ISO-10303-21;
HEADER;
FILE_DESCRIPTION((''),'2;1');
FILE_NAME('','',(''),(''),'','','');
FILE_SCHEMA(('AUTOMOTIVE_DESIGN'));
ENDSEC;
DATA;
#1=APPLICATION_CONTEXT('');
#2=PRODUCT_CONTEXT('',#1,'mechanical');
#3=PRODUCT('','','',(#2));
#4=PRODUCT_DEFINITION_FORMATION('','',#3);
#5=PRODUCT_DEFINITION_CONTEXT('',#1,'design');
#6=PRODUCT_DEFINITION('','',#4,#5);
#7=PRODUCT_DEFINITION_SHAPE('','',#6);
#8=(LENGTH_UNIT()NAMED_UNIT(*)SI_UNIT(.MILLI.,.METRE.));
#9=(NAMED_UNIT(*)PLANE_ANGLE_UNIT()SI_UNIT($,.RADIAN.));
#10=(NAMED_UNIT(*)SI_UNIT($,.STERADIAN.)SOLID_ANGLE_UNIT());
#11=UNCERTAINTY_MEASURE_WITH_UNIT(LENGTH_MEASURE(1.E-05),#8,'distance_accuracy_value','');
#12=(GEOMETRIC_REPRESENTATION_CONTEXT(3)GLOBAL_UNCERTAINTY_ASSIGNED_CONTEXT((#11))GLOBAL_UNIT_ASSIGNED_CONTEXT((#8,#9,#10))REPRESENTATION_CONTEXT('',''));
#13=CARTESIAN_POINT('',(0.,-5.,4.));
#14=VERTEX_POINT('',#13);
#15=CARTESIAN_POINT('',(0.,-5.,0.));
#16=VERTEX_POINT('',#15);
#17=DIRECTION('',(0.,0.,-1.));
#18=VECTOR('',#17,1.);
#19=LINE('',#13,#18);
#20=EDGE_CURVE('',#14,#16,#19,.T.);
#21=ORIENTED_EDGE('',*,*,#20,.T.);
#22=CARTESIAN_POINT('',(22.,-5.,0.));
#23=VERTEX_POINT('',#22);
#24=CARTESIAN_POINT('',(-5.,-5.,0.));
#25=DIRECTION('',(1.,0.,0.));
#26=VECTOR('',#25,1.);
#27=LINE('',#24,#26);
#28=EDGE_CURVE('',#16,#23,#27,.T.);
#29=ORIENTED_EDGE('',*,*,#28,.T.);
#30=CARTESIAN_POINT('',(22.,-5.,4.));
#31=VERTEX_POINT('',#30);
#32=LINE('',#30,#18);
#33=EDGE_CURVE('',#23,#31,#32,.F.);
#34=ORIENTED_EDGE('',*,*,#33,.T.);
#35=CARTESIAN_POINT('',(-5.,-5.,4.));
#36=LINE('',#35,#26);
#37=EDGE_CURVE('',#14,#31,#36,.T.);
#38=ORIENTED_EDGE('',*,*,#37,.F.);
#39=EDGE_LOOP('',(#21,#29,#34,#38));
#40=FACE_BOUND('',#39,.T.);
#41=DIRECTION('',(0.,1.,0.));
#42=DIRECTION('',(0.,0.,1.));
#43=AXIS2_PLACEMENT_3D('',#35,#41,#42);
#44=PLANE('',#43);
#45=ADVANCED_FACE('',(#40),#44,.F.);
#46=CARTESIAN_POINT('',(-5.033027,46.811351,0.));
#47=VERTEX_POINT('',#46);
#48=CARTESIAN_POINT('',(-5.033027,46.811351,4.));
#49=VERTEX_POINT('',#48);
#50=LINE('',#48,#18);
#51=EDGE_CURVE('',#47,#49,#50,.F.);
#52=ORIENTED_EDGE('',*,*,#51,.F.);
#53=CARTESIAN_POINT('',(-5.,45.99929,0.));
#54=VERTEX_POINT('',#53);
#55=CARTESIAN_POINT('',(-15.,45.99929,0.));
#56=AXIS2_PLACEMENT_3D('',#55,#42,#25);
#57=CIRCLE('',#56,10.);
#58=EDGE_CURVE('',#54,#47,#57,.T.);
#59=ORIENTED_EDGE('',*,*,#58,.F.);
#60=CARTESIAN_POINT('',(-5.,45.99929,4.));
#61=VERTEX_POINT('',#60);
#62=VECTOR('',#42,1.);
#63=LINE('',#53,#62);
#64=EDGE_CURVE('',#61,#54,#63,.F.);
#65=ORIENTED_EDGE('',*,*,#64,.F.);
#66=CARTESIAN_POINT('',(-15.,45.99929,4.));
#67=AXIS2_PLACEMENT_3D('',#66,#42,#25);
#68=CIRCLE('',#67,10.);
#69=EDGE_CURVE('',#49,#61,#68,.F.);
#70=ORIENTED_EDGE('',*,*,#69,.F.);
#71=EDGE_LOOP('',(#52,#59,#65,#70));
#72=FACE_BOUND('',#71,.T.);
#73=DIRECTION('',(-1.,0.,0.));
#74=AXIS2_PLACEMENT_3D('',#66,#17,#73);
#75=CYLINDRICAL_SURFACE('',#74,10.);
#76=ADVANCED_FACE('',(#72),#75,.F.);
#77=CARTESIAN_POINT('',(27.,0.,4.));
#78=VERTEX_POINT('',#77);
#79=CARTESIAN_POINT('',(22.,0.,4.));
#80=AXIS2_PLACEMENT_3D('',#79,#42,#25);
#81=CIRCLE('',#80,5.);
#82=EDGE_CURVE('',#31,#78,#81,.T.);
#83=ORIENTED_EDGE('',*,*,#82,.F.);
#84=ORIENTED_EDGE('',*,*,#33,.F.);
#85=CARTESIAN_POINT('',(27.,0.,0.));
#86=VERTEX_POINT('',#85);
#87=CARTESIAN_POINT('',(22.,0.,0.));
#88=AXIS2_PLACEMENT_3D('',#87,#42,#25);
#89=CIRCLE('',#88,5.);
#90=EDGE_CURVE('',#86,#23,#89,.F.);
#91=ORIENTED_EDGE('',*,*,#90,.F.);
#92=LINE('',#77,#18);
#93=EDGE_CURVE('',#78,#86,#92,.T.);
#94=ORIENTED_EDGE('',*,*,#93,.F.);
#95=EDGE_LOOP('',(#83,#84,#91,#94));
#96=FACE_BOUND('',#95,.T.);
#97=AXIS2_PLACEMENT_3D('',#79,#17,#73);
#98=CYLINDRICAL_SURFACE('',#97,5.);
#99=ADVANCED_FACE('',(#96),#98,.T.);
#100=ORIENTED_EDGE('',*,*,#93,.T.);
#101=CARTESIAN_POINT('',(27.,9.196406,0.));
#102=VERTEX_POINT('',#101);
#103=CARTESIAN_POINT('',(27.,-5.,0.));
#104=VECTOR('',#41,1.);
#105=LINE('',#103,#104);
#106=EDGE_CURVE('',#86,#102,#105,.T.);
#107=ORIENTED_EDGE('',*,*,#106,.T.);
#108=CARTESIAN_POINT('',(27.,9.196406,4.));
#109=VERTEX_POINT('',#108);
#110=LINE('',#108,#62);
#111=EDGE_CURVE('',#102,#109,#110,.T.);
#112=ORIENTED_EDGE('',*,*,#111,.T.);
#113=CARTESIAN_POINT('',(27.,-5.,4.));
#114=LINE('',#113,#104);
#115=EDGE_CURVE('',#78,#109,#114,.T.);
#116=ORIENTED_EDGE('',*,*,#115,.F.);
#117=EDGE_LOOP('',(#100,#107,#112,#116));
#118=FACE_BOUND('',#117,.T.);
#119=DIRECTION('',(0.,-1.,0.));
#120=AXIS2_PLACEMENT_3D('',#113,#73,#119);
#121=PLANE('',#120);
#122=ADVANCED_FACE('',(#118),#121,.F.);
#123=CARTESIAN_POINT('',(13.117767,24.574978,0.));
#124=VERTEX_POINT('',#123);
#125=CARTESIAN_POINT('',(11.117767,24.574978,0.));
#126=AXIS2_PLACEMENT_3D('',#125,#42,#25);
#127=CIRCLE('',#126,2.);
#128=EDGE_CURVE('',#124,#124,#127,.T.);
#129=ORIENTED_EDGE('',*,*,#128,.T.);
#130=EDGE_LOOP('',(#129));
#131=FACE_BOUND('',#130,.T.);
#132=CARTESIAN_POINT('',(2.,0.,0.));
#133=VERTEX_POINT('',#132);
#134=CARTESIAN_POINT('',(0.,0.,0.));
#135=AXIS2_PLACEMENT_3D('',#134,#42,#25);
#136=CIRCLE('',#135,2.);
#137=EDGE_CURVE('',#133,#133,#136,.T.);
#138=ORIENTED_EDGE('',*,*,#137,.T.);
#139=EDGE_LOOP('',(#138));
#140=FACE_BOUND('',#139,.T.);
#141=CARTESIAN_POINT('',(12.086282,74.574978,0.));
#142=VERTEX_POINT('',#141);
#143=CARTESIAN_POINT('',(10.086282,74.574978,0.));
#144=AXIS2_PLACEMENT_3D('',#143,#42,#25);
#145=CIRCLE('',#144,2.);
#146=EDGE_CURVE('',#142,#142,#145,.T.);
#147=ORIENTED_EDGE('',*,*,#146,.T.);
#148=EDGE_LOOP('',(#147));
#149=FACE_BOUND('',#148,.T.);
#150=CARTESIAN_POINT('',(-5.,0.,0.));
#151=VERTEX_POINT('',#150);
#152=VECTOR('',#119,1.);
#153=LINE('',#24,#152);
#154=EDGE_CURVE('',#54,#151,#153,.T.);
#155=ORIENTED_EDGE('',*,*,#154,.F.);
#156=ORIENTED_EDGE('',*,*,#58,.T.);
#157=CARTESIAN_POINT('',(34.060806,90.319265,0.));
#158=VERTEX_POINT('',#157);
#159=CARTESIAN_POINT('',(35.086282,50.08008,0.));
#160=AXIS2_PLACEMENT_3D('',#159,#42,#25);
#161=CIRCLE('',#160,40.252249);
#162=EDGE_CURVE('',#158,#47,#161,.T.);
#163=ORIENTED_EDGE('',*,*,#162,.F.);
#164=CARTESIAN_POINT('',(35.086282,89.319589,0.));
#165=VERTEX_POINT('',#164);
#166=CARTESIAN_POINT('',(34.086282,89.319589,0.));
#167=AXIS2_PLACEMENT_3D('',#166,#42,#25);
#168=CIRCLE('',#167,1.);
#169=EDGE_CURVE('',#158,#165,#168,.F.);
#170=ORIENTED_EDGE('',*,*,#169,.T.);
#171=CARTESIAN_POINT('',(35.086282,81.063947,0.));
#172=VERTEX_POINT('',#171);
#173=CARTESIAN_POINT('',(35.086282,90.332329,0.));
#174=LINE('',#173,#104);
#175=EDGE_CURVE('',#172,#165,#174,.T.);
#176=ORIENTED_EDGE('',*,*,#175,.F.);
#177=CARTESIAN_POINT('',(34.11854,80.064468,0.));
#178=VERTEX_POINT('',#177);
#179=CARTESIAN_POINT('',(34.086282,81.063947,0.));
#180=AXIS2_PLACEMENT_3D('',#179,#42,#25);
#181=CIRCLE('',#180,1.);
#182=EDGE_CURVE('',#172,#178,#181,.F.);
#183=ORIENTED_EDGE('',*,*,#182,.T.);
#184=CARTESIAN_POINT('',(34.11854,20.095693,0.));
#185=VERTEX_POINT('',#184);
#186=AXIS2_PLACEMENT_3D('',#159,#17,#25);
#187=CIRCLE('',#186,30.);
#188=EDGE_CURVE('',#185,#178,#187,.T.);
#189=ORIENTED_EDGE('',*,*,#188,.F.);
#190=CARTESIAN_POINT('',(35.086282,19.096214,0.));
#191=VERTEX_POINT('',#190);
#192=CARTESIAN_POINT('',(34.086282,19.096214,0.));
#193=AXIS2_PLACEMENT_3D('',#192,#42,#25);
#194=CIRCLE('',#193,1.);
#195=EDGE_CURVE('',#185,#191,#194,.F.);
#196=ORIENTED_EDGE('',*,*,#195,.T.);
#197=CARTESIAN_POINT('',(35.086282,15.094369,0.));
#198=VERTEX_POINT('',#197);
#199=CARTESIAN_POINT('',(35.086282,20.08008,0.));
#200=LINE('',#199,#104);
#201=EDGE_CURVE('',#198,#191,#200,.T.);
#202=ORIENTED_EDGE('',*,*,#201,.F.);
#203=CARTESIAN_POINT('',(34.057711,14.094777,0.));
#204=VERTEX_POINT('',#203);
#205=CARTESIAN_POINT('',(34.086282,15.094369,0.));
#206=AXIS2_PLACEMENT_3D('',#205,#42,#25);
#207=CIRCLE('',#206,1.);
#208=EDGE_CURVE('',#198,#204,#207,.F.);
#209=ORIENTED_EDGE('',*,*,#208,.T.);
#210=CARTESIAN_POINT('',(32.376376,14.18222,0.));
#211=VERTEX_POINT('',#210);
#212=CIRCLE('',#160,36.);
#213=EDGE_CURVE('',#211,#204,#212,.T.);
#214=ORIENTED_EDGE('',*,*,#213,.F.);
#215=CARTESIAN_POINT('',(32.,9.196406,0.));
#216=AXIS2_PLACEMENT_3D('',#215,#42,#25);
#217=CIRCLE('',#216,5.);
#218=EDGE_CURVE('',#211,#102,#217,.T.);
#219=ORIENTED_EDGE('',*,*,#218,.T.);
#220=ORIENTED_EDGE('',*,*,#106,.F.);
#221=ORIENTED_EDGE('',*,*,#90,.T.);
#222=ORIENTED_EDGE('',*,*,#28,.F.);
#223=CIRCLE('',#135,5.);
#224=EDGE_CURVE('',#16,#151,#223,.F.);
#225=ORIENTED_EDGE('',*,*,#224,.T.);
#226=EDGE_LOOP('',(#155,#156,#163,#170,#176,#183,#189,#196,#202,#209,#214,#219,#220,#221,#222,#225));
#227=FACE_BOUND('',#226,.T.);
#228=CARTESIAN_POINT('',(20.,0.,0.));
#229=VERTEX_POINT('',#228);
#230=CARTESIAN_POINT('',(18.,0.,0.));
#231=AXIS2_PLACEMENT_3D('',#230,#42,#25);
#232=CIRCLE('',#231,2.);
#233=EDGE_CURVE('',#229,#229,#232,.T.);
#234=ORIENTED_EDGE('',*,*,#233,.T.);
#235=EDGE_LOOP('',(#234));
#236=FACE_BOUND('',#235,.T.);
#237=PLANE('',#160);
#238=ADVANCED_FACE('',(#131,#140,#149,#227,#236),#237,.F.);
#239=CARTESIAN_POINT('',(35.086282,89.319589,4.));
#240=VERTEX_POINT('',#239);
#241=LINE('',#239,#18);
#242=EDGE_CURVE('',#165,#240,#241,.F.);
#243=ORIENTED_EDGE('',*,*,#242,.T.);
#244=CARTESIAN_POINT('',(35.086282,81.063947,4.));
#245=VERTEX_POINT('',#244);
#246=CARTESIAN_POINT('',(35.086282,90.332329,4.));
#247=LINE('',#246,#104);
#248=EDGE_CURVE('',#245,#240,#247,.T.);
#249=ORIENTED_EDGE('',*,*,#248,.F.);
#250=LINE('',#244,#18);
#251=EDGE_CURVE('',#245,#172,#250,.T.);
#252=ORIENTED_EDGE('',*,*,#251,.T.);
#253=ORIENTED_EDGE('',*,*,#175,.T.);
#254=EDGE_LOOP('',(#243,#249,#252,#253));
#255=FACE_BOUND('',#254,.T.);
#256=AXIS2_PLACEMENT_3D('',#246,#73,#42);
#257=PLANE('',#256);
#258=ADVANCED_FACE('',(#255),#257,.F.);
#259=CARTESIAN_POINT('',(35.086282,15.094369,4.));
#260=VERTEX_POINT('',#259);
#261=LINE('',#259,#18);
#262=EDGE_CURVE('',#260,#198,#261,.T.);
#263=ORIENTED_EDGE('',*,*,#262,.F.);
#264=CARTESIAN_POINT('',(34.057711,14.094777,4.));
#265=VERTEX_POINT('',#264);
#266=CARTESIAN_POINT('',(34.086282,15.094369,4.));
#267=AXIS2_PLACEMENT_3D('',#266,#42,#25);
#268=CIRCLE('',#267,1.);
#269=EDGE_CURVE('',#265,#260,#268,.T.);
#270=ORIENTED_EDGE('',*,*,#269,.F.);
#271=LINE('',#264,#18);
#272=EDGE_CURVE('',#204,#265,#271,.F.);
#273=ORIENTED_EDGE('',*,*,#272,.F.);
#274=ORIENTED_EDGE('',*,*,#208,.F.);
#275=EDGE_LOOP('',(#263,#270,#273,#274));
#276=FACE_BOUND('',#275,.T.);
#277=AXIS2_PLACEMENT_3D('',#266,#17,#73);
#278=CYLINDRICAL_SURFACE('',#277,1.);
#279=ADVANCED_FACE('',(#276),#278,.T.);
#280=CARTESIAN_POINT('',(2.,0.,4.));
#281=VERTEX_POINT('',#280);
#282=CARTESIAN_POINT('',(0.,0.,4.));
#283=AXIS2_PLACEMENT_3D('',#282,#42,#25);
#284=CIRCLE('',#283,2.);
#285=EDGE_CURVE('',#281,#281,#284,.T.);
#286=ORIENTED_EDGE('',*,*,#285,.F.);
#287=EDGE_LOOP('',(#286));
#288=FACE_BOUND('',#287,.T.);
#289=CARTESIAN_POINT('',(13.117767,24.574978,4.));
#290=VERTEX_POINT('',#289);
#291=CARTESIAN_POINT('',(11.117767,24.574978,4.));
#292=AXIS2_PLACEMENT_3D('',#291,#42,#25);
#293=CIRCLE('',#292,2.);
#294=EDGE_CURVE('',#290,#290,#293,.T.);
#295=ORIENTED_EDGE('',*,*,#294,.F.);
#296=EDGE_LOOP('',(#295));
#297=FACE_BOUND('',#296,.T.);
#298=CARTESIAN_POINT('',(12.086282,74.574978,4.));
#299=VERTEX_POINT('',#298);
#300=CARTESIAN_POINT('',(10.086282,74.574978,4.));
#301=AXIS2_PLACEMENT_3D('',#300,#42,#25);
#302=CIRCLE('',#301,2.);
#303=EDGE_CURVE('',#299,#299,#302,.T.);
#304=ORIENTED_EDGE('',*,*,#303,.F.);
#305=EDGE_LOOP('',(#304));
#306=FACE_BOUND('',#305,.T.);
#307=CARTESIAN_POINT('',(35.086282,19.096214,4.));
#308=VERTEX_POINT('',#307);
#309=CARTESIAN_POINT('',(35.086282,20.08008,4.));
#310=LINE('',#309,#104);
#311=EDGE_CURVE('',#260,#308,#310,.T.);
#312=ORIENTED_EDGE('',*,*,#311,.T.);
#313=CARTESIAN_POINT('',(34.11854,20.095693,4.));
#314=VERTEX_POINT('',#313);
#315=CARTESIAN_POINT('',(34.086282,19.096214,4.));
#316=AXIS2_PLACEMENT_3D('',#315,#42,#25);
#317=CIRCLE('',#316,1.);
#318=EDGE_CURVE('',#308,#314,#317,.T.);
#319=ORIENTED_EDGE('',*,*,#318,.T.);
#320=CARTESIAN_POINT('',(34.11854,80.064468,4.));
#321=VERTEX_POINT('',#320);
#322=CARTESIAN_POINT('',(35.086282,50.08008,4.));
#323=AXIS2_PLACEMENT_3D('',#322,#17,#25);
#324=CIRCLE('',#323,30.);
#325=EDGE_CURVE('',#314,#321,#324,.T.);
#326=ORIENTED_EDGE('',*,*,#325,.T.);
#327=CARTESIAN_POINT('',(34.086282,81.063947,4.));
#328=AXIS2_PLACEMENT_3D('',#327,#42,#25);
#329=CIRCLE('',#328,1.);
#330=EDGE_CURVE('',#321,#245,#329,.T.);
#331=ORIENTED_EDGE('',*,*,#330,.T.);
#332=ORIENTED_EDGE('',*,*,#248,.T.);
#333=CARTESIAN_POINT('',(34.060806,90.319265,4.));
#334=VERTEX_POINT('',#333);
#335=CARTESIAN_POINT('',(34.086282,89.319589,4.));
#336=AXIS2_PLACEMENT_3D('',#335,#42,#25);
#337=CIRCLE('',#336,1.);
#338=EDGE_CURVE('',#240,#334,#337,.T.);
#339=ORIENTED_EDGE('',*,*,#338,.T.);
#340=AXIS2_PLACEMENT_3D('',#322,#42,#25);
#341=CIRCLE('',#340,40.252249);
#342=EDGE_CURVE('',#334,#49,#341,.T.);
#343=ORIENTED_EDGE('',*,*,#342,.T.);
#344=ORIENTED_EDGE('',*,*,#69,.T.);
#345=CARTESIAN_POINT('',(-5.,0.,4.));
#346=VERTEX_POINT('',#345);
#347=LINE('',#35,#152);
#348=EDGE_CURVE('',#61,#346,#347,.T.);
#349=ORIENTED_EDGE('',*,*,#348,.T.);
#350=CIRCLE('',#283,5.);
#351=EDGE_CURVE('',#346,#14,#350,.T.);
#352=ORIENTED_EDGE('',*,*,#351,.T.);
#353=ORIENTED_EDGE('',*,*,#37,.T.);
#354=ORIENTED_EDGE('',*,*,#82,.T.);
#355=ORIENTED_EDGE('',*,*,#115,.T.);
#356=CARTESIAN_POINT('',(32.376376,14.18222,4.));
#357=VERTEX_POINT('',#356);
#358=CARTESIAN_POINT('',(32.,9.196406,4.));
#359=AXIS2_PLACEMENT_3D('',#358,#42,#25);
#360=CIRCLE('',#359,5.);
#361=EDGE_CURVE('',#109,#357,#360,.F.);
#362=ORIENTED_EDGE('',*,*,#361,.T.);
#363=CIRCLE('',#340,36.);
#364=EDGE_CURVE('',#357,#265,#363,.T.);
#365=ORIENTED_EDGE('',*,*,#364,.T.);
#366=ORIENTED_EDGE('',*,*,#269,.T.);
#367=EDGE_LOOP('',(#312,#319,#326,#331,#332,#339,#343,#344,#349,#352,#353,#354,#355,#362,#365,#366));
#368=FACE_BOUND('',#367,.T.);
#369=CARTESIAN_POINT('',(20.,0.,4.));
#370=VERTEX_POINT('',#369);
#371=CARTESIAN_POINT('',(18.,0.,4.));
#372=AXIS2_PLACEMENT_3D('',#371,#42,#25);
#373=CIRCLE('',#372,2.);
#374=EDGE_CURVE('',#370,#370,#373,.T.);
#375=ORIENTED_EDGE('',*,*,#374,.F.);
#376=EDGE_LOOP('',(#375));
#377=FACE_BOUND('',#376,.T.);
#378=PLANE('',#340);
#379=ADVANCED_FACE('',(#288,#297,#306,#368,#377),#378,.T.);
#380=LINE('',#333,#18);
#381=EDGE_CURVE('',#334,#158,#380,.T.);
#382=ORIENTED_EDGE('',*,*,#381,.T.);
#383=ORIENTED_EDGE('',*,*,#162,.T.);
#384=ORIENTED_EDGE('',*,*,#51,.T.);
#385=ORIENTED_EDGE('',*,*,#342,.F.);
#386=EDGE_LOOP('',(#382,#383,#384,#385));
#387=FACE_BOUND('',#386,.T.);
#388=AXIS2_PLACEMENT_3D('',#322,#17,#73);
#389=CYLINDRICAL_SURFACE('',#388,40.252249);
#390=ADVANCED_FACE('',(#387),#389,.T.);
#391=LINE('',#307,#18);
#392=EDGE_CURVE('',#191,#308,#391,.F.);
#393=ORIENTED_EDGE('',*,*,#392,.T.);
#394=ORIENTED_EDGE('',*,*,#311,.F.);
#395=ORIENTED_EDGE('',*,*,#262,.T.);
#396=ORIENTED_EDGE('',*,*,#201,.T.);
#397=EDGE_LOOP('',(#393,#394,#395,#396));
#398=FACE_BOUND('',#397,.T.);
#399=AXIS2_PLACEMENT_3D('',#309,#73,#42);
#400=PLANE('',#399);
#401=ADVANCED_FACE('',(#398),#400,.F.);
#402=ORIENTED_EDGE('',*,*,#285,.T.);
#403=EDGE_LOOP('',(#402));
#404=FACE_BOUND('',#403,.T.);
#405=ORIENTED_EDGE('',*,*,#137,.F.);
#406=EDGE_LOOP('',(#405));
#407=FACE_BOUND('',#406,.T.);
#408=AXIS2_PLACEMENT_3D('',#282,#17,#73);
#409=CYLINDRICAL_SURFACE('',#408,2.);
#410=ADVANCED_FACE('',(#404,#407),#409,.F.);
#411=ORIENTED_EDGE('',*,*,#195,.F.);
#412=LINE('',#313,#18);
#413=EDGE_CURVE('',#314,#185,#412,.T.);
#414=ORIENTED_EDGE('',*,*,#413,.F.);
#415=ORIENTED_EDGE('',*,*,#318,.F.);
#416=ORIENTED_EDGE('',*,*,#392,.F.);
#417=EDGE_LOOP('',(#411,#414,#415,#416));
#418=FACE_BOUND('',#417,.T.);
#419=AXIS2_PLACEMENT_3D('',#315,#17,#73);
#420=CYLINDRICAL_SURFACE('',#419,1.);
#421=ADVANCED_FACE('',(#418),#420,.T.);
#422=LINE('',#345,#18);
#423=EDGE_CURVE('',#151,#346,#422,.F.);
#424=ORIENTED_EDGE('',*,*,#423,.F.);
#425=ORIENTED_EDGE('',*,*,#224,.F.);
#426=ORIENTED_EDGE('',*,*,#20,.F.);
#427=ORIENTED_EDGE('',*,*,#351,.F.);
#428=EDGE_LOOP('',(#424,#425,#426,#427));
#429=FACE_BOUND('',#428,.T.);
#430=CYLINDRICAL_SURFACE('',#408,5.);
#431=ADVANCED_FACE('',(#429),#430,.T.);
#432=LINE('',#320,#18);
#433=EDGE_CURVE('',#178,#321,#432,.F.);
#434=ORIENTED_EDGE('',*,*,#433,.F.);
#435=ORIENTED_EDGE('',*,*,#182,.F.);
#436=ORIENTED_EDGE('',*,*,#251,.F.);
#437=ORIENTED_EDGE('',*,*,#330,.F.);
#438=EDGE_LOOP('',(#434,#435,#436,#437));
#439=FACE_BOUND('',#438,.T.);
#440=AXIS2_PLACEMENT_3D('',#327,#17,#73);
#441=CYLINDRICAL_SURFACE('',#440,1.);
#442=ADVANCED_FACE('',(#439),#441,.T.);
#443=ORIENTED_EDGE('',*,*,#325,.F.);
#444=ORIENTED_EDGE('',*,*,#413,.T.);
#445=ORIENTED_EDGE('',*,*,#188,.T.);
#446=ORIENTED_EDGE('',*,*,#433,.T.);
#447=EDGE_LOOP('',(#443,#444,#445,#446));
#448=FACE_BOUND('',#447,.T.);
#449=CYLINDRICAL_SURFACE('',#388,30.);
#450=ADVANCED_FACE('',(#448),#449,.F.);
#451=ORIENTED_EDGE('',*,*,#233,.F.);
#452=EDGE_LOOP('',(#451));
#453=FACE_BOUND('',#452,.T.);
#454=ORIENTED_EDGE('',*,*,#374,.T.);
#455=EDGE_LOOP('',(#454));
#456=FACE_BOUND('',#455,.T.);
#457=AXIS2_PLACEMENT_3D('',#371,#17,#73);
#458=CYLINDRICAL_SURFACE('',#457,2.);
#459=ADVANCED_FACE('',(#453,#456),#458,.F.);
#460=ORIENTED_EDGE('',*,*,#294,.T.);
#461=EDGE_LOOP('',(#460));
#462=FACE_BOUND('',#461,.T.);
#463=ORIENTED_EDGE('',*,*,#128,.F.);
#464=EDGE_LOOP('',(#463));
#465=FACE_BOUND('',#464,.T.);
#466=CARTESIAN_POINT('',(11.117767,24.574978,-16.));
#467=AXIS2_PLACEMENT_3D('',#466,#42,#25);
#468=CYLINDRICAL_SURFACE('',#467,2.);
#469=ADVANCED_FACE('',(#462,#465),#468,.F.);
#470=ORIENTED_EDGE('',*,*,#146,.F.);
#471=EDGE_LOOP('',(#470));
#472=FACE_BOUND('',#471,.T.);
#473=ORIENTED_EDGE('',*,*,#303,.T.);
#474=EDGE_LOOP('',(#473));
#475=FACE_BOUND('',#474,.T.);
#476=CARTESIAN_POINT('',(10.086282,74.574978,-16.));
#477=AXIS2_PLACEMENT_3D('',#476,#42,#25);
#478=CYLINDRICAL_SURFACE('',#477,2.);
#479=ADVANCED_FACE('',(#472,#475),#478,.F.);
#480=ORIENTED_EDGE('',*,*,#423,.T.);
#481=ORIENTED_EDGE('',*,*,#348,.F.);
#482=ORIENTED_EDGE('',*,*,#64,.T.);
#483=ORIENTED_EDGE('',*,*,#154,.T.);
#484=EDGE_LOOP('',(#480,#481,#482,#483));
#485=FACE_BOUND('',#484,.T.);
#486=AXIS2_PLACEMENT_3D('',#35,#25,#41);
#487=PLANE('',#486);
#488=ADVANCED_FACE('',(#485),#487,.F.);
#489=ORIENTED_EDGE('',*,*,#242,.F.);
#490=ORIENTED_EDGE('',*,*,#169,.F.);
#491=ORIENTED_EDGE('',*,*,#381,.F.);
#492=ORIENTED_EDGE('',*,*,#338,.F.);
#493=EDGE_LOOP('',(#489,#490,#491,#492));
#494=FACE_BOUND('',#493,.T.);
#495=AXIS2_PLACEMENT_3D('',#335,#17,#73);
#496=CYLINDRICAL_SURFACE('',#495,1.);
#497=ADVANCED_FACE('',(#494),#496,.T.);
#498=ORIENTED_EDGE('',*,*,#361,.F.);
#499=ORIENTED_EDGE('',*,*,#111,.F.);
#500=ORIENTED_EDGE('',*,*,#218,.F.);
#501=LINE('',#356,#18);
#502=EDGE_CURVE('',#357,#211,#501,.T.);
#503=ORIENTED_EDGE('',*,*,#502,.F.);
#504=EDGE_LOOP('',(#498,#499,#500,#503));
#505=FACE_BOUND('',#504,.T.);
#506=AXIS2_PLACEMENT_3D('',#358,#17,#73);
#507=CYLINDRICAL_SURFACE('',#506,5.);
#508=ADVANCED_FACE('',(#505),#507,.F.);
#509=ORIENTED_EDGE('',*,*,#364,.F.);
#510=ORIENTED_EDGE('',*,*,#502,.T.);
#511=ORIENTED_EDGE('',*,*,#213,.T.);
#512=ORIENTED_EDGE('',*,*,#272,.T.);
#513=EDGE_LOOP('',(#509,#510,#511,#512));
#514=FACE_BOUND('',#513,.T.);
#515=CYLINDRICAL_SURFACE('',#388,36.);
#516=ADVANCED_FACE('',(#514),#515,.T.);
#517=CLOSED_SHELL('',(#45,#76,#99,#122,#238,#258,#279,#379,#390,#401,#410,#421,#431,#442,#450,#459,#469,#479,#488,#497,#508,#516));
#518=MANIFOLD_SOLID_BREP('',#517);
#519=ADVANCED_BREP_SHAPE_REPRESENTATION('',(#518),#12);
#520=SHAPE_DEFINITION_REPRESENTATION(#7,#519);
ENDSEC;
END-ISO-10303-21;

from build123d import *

# Parameters (mm, degrees)
SKETCH1_R           = 2
BOSS_EXTRUDE1_DEPTH = 4
FILLET10_R          = 1
FILLET11_R          = 10
FILLET12_R          = 5
FILLET13_R          = 5
FILLET14_R          = 5
SKETCH2_R           = 2
CUT_EXTRUDE1_DEPTH  = 20


with BuildPart() as part:
    # Sketch1 → Boss-Extrude1 (new body)
    with BuildSketch(Plane.XY):
        with BuildLine():
            Line((-5, -5), (-5, 46.428571429))
            ThreePointArc((-5, 46.428571429), (5.360662074, 77.221028176), (35.086282243, 90.332329282))
            Line((35.086282243, 90.332329282), (35.086282243, 80.08008038))
            ThreePointArc((35.086282243, 80.08008038), (5.086282243, 50.08008038), (35.086282243, 20.08008038))
            Line((35.086282243, 20.08008038), (35.086282243, 14.08008038))
            ThreePointArc((35.086282243, 14.08008038), (31.017062028, 14.31079961), (27, 15))
            Line((27, 15), (27, -5))
            Line((27, -5), (-5, -5))
        make_face()
        Circle(SKETCH1_R, mode=Mode.SUBTRACT)
        with Locations((18, 0)):
            Circle(SKETCH1_R, mode=Mode.SUBTRACT)
    extrude(amount=BOSS_EXTRUDE1_DEPTH)

    # Fillet10
    fillet10_edges = [part.edges().sort_by_distance(p)[0] for p in [
        (35.086282243, 90.332329282, 2),
        (35.086282243, 80.08008038, 2),
        (35.086282243, 20.08008038, 2),
        (35.086282243, 14.08008038, 2),
    ]]
    fillet(fillet10_edges, radius=FILLET10_R)

    # Fillet11
    # the kernel refuses this fillet: 10 mm, written as the material it adds along each edge
    with BuildSketch(Plane(origin=(-5, 46.428571429, 0), x_dir=(-0.08596186737445177, 0.996298427860597, 0), z_dir=(0, 0, 1))) as fillet11_piece_1:
        with BuildLine():
            CenterArc((0.431926178, 9.999886119), FILLET11_R, 265.068661729, 4.657897264)
            Line((-0.427692496, 0.03690184), (0, 0))
            ThreePointArc((0, 0), (0.19210095, 0.000458397), (0.3842019, 0))
        make_face()
    extrude(amount=4)

    # Fillet12
    fillet12_edges = [part.edges().sort_by_distance(p)[0] for p in [
        (-5, -5, 2),
    ]]
    fillet(fillet12_edges, radius=FILLET12_R)

    # Fillet13
    fillet13_edges = [part.edges().sort_by_distance(p)[0] for p in [
        (27, -5, 2),
    ]]
    fillet(fillet13_edges, radius=FILLET13_R)

    # Fillet14
    fillet14_edges = [part.edges().sort_by_distance(p)[0] for p in [
        (27, 15, 2),
    ]]
    fillet(fillet14_edges, radius=FILLET14_R)

    # Sketch2 → Cut-Extrude1 (cut)
    with BuildSketch(Plane.XY.offset(4)):
        with Locations((10.086282243, 74.574977808)):
            Circle(SKETCH2_R)
        with Locations((11.117766586, 24.574977808)):
            Circle(SKETCH2_R)
    extrude(amount=-CUT_EXTRUDE1_DEPTH, mode=Mode.SUBTRACT)


solid = part.part
